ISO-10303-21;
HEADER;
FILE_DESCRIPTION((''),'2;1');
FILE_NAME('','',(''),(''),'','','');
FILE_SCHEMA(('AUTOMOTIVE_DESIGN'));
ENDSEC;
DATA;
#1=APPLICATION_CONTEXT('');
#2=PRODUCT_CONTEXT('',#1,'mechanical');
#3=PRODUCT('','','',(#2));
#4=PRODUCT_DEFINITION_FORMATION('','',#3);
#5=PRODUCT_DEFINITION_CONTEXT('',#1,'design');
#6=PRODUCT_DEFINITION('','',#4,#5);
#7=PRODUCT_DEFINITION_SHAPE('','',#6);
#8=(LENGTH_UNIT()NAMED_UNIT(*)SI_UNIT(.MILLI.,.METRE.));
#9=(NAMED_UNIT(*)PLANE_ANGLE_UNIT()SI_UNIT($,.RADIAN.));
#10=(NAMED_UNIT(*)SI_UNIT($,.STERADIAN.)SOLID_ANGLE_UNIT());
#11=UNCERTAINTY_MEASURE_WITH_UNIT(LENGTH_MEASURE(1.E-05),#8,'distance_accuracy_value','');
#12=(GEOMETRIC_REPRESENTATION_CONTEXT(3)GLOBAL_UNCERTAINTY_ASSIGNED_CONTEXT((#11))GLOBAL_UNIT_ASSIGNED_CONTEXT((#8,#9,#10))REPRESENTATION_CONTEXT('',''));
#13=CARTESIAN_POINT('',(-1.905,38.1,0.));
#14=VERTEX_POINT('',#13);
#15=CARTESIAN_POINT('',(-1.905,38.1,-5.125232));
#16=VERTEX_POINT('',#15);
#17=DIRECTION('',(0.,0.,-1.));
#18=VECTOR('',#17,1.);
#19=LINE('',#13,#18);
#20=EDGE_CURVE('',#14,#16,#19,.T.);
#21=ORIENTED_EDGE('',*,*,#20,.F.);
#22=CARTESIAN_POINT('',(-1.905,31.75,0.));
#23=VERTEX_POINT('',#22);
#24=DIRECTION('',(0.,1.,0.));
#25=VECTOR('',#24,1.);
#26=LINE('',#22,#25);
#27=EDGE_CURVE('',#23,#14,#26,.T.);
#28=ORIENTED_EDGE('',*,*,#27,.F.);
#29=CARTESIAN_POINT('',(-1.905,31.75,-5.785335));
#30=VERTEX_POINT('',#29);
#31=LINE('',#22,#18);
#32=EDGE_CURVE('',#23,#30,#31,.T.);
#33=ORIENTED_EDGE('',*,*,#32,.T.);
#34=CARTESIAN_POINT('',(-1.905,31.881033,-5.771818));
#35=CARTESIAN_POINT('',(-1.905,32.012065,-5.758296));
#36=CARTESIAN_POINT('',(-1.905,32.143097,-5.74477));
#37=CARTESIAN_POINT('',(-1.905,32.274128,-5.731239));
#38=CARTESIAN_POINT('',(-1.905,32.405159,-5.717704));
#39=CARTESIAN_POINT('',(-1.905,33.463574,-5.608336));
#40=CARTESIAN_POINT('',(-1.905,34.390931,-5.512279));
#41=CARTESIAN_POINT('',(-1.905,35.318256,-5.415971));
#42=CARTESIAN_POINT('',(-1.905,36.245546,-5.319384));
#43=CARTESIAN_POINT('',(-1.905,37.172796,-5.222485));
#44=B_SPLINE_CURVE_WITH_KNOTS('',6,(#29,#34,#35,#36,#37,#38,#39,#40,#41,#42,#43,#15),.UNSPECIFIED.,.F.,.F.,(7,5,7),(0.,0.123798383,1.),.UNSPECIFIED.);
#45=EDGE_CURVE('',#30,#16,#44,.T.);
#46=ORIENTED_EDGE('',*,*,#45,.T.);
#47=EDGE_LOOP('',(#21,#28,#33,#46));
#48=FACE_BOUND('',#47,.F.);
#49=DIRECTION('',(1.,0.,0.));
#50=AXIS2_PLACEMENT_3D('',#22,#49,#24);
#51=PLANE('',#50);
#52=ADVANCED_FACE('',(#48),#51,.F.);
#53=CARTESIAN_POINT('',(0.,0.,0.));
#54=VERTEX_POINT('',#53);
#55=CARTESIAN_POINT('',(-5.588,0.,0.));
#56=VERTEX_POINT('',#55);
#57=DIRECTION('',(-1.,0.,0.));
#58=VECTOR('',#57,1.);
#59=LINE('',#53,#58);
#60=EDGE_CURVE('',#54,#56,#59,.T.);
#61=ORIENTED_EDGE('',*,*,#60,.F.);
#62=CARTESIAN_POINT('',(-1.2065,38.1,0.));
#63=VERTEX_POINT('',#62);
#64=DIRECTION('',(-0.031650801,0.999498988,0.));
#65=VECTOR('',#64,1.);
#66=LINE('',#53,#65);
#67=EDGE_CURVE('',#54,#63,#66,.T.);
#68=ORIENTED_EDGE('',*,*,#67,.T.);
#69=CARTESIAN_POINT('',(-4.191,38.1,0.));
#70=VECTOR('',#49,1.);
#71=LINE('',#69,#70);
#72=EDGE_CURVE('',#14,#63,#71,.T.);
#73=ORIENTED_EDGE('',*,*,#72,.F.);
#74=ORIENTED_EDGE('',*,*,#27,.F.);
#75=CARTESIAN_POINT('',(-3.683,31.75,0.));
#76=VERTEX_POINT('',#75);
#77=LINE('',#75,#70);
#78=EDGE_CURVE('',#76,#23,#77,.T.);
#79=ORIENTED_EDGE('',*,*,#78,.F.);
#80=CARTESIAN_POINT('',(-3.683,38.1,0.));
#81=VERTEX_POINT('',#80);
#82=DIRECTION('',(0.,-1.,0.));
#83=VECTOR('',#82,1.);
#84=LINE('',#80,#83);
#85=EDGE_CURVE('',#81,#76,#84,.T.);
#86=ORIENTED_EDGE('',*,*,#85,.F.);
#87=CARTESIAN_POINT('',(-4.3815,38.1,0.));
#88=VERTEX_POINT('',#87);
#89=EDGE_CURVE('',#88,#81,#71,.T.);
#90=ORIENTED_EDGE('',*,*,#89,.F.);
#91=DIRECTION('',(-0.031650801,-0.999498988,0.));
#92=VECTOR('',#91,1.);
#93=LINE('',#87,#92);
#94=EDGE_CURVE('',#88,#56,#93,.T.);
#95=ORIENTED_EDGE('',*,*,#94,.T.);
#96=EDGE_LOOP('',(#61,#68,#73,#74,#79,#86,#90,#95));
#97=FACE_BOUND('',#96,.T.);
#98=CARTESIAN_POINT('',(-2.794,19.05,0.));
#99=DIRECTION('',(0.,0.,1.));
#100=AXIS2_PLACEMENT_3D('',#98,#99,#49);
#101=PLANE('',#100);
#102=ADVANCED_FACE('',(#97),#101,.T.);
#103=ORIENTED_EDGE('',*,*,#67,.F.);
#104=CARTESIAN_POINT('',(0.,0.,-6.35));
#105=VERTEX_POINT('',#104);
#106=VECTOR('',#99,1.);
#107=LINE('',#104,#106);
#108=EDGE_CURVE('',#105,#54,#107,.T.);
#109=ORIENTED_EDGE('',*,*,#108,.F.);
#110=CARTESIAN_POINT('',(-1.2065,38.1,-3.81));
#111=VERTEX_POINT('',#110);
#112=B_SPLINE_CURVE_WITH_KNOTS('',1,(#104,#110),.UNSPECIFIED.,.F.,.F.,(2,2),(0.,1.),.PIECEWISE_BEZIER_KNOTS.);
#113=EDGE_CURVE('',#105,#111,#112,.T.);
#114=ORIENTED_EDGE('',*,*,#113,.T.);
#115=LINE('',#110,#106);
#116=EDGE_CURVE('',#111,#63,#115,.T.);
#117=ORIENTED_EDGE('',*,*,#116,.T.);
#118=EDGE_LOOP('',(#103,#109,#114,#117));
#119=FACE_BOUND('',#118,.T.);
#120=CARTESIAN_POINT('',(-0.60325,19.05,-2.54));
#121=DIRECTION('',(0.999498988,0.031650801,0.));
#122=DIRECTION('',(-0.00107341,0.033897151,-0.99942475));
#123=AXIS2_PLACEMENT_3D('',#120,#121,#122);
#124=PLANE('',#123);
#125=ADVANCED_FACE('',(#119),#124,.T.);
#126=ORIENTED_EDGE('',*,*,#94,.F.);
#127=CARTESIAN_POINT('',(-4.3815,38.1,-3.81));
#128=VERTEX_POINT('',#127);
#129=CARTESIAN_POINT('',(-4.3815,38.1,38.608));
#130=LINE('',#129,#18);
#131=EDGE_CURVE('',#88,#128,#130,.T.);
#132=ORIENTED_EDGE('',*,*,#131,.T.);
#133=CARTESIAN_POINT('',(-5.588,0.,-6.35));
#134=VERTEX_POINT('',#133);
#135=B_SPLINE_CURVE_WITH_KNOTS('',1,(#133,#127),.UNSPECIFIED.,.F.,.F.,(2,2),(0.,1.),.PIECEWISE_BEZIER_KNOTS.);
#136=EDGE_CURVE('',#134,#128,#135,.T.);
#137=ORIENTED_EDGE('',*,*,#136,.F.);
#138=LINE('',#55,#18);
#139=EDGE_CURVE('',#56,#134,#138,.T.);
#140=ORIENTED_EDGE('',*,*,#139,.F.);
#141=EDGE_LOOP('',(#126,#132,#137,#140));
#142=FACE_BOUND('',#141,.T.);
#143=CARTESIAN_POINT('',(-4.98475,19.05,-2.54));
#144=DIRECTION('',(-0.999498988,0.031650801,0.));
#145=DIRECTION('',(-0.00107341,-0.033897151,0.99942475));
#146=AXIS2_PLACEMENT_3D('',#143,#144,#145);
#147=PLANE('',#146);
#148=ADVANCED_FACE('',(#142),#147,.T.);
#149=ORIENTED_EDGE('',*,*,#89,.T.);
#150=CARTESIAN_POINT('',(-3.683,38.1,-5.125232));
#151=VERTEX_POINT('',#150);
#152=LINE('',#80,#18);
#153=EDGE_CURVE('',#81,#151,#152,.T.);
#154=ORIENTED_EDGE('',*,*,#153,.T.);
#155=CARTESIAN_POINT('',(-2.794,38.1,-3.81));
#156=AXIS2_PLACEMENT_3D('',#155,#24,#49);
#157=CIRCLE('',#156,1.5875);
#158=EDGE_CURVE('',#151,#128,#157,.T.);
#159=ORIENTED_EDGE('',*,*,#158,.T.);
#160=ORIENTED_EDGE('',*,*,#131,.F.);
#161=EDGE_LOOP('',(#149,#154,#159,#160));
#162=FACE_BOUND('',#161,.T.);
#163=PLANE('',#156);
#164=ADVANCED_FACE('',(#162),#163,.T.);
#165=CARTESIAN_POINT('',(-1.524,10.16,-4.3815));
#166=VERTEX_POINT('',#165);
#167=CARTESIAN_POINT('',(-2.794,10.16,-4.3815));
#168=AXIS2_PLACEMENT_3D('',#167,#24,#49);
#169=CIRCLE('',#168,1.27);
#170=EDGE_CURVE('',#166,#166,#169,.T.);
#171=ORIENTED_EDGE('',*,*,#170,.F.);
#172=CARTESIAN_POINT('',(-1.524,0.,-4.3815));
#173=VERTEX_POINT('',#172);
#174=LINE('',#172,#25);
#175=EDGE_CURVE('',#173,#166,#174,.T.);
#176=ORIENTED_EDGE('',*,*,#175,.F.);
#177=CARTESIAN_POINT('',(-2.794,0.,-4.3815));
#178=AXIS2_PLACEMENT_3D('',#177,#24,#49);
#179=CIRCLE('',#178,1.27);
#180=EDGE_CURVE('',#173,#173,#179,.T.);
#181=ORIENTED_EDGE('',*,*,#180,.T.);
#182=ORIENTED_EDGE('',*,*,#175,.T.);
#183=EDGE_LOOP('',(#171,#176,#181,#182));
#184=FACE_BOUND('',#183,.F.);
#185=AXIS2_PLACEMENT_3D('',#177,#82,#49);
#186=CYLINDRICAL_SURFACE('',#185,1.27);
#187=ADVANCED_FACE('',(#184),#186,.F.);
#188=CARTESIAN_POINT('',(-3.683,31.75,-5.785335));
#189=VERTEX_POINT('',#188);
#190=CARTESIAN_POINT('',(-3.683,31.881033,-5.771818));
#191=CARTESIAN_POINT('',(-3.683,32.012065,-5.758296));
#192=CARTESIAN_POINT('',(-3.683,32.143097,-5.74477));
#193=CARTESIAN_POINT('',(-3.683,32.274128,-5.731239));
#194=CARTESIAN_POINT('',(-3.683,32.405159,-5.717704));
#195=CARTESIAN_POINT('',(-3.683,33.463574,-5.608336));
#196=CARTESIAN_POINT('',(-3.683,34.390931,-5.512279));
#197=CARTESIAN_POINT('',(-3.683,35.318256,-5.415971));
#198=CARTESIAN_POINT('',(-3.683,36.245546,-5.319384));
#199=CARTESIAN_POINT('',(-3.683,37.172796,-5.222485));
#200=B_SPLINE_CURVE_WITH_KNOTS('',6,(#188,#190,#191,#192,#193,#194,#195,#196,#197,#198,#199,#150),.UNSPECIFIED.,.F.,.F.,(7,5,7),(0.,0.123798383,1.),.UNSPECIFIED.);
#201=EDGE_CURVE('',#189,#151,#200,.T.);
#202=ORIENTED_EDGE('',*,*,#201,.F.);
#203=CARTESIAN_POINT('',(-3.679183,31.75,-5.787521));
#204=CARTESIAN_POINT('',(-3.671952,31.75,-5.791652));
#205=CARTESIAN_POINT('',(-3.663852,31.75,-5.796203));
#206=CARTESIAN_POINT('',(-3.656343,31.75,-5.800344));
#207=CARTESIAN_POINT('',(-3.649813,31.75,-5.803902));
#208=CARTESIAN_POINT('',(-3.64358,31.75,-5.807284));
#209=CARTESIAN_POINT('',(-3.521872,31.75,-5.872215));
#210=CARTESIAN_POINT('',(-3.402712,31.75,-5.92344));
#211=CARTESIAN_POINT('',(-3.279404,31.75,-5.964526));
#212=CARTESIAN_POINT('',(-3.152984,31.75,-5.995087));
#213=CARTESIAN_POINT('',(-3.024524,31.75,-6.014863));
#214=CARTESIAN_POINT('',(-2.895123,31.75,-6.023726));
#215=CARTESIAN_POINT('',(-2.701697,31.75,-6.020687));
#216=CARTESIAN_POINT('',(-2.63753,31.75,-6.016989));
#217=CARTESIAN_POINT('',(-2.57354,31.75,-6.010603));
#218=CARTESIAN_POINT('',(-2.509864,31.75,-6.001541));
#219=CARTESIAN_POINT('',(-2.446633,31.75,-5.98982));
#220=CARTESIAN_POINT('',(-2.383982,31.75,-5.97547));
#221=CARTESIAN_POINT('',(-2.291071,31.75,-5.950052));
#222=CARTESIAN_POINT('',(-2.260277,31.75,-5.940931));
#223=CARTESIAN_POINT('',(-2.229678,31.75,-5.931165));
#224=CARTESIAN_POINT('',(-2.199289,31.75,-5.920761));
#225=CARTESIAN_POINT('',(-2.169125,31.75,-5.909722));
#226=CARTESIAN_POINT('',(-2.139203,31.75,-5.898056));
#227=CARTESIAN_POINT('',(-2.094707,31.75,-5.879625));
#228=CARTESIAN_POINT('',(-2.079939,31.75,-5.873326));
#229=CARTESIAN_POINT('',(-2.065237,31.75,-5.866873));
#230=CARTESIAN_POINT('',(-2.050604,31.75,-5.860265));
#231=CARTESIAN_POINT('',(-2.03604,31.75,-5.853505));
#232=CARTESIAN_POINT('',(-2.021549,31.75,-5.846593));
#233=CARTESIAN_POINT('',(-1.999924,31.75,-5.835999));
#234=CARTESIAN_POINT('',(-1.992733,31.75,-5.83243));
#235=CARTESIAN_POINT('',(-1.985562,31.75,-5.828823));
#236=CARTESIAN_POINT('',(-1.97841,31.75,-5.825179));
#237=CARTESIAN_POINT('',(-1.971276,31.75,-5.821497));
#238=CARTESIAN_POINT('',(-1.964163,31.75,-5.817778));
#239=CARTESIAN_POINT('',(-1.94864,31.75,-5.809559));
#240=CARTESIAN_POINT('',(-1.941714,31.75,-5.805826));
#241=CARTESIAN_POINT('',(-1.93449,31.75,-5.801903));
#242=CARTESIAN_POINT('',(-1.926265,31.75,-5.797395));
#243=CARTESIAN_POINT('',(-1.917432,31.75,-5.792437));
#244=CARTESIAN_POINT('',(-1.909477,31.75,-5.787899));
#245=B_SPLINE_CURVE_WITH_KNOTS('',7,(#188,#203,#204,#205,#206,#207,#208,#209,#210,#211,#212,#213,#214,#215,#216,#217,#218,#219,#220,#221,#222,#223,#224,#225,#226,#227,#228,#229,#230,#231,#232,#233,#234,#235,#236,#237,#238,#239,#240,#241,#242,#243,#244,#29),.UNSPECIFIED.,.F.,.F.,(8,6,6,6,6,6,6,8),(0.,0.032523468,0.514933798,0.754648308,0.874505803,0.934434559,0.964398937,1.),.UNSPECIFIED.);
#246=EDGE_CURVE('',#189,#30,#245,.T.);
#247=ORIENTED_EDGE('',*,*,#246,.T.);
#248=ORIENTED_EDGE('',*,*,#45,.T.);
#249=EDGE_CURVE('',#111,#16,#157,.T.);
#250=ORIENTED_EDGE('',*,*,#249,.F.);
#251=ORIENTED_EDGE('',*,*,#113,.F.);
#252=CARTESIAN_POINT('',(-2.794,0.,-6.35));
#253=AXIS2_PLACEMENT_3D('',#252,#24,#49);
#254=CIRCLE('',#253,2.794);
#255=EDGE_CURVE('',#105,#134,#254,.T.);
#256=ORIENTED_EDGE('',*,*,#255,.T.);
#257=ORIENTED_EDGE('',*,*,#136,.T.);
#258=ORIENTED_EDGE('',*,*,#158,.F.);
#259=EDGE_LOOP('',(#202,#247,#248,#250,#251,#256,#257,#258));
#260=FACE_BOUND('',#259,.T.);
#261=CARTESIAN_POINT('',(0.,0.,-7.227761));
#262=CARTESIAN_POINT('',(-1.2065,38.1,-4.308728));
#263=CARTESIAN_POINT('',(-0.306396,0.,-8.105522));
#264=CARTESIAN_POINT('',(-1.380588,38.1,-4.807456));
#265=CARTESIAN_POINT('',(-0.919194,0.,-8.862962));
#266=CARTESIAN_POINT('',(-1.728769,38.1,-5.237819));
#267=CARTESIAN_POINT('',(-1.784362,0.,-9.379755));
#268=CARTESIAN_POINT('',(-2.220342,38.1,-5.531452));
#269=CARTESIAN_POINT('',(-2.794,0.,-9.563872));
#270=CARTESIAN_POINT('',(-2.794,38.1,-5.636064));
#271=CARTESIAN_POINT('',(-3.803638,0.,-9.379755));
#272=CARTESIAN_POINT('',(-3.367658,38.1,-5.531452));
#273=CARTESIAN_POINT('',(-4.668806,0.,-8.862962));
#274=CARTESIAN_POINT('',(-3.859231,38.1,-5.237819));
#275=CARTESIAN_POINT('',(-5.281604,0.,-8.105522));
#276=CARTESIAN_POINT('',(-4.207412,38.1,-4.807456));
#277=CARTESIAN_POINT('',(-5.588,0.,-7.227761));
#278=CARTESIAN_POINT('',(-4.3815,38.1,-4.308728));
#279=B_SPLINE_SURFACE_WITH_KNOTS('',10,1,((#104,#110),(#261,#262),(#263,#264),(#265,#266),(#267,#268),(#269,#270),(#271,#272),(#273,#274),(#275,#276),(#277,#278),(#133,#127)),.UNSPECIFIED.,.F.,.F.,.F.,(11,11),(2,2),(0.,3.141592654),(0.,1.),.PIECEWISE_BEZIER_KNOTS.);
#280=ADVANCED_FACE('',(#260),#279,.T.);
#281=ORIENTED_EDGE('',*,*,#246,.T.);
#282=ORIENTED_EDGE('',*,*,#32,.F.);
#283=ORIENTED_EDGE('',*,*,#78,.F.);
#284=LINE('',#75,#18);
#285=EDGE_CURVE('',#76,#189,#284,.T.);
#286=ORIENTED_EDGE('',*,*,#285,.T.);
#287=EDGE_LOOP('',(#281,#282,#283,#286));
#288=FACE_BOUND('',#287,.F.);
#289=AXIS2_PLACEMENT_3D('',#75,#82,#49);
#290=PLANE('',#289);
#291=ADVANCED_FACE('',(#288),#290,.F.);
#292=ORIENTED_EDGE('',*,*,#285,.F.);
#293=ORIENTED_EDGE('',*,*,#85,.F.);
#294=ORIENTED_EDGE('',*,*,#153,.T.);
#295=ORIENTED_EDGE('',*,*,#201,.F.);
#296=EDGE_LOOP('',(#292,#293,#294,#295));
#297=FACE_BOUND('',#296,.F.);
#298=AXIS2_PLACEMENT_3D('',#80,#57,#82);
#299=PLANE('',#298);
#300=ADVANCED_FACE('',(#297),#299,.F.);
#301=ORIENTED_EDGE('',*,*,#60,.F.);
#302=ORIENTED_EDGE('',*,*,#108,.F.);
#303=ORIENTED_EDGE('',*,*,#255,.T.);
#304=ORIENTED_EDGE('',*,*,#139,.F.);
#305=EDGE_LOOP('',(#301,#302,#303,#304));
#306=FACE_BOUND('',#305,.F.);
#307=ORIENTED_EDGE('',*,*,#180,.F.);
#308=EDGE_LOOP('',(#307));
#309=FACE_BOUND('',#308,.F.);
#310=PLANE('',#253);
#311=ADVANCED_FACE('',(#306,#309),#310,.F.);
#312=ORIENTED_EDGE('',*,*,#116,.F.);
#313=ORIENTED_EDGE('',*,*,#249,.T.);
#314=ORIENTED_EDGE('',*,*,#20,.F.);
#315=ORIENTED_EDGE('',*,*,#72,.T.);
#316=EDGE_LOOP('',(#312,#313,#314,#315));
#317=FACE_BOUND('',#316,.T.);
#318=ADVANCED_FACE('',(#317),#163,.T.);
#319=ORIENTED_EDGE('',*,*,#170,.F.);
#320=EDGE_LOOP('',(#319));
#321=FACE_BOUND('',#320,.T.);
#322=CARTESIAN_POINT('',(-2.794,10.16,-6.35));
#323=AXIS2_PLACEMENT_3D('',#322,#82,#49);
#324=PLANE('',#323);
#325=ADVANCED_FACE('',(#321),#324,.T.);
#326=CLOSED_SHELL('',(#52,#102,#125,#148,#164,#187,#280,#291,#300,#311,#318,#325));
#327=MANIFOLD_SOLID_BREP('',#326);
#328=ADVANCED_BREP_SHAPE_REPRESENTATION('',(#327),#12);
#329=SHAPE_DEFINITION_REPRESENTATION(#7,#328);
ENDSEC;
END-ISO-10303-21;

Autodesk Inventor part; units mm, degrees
ref_plane "YZ Plane" through (0, 0, 0) normal (1, 0, 0) x (0, 1, 0)
ref_plane "XY Plane" through (0, 0, 0) normal (0, 0, 1) x (1, 0, 0)
sketch "Sketch6" plane through (0, 0, 0) normal (0, 1, 0) x (-1, 0, 0)
  line L0 (0, 0) -> (5.588, 0)
  line L1 (5.588, 0) -> (5.588, -6.35)
  line L2 (5.588, -6.35) -> (0, -6.35)
  line L3 (0, -6.35) -> (0, 0)
  arc A0 (0, -6.35) -> (5.588, -6.35) centre (2.794, -6.35) ccw
  dimension "d25" = 5.588
  dimension "d26" = 6.35
ref_plane "Work Plane1" through (0, 38.1, 0) normal (0, 1, 0) x (-1, 0, 0)
sketch "Sketch8" plane through (0, 38.1, 0) normal (0, 1, 0) x (-1, 0, 0)
  line L0 (4.3815, 0) -> (1.2065, 0)
  line L1 (1.2065, 0) -> (1.2065, -3.81)
  line L2 (1.2065, -3.81) -> (4.3815, -3.81)
  line L3 (4.3815, -3.81) -> (4.3815, 0)
  arc A0 (1.2065, -3.81) -> (4.3815, -3.81) centre (2.794, -3.81) ccw
  point P0 (0, 0)
  dimension "d27" = 3.175
  dimension "d28" = 3.81
  dimension "d49" = 1.2065
loft "Loft1" add profiles "Sketch6", "Sketch8"
sketch "Sketch9" plane through (-5.588, 0, 0) normal (0, 0, 1) x (1, 0, 0)
  line L0 (0, 0) -> (5.588, 0) projected
  line L1 (5.588, 0) -> (4.3815, 38.1) projected
  line L2 (1.2065, 38.1) -> (4.3815, 38.1) projected
  line L3 (0, 0) -> (1.2065, 38.1) projected
  line L4 (4.3815, 38.1) -> (5.588, 0) projected
  line L5 (4.5826, 31.75) -> (1.0054, 31.75)
  line L6 (0, 0) -> (1.2065, 38.1) projected
  dimension "d34" = 6.35
extrude "Extrusion5" add sketch "Sketch9" along normal blind 38.608 contours L3 L2 L1 L5
sketch "Sketch12" plane through (-2.794, 0, -6.35) normal (0, -1, 0) x (1, 0, 0)
  circle A0 centre (0, 1.9685) radius 1.27
  arc A1 (-2.794, 0) -> (2.794, 0) centre (0, 0) ccw projected
  line L0 (0, -2.794) -> (0, 1.9685)
  point P0 (2.794, 6.35)
  dimension "d44" = 2.54
  dimension "d46" = 4.7625
extrude "Extrusion8" cut sketch "Sketch12" against normal blind 10.16
sketch "Sketch13" plane through (-5.588, 0, 0) normal (0, 0, 1) x (1, 0, 0)
  line L0 (1.2065, 38.1) -> (4.3815, 38.1) projected
  line L1 (3.683, 38.1) -> (1.905, 38.1)
  line L2 (1.905, 38.1) -> (1.905, 31.75)
  line L3 (1.905, 31.75) -> (3.683, 31.75)
  line L4 (3.683, 31.75) -> (3.683, 38.1)
  line L5 (3.683, 31.75) -> (4.5826, 31.75) construction
  line L6 (4.3815, 38.1) -> (5.588, 0) construction
  line L7 (1.905, 31.75) -> (1.0054, 31.75) construction
  line L8 (0, 0) -> (1.2065, 38.1) construction
  line L9 (6.375, 40.676) -> (-2.8276, 40.676)
  line L10 (-2.8276, 40.676) -> (-2.8276, 26.7394)
  line L11 (-2.8276, 26.7394) -> (6.375, 26.7394)
  line L12 (6.375, 26.7394) -> (6.375, 40.676)
  dimension "d50" = 1.778
  dimension "d51" = 6.35
extrude "Extrusion9" cut sketch "Sketch13" against normal through all contours L0 L4 L3 L2
extrude "Extrusion10" cut sketch "Sketch13" along normal through all contours L0 L4 L3 L2 | L12 L11 L10 L9
properties part number "RudderStabilizingFinBottom_Print1"
